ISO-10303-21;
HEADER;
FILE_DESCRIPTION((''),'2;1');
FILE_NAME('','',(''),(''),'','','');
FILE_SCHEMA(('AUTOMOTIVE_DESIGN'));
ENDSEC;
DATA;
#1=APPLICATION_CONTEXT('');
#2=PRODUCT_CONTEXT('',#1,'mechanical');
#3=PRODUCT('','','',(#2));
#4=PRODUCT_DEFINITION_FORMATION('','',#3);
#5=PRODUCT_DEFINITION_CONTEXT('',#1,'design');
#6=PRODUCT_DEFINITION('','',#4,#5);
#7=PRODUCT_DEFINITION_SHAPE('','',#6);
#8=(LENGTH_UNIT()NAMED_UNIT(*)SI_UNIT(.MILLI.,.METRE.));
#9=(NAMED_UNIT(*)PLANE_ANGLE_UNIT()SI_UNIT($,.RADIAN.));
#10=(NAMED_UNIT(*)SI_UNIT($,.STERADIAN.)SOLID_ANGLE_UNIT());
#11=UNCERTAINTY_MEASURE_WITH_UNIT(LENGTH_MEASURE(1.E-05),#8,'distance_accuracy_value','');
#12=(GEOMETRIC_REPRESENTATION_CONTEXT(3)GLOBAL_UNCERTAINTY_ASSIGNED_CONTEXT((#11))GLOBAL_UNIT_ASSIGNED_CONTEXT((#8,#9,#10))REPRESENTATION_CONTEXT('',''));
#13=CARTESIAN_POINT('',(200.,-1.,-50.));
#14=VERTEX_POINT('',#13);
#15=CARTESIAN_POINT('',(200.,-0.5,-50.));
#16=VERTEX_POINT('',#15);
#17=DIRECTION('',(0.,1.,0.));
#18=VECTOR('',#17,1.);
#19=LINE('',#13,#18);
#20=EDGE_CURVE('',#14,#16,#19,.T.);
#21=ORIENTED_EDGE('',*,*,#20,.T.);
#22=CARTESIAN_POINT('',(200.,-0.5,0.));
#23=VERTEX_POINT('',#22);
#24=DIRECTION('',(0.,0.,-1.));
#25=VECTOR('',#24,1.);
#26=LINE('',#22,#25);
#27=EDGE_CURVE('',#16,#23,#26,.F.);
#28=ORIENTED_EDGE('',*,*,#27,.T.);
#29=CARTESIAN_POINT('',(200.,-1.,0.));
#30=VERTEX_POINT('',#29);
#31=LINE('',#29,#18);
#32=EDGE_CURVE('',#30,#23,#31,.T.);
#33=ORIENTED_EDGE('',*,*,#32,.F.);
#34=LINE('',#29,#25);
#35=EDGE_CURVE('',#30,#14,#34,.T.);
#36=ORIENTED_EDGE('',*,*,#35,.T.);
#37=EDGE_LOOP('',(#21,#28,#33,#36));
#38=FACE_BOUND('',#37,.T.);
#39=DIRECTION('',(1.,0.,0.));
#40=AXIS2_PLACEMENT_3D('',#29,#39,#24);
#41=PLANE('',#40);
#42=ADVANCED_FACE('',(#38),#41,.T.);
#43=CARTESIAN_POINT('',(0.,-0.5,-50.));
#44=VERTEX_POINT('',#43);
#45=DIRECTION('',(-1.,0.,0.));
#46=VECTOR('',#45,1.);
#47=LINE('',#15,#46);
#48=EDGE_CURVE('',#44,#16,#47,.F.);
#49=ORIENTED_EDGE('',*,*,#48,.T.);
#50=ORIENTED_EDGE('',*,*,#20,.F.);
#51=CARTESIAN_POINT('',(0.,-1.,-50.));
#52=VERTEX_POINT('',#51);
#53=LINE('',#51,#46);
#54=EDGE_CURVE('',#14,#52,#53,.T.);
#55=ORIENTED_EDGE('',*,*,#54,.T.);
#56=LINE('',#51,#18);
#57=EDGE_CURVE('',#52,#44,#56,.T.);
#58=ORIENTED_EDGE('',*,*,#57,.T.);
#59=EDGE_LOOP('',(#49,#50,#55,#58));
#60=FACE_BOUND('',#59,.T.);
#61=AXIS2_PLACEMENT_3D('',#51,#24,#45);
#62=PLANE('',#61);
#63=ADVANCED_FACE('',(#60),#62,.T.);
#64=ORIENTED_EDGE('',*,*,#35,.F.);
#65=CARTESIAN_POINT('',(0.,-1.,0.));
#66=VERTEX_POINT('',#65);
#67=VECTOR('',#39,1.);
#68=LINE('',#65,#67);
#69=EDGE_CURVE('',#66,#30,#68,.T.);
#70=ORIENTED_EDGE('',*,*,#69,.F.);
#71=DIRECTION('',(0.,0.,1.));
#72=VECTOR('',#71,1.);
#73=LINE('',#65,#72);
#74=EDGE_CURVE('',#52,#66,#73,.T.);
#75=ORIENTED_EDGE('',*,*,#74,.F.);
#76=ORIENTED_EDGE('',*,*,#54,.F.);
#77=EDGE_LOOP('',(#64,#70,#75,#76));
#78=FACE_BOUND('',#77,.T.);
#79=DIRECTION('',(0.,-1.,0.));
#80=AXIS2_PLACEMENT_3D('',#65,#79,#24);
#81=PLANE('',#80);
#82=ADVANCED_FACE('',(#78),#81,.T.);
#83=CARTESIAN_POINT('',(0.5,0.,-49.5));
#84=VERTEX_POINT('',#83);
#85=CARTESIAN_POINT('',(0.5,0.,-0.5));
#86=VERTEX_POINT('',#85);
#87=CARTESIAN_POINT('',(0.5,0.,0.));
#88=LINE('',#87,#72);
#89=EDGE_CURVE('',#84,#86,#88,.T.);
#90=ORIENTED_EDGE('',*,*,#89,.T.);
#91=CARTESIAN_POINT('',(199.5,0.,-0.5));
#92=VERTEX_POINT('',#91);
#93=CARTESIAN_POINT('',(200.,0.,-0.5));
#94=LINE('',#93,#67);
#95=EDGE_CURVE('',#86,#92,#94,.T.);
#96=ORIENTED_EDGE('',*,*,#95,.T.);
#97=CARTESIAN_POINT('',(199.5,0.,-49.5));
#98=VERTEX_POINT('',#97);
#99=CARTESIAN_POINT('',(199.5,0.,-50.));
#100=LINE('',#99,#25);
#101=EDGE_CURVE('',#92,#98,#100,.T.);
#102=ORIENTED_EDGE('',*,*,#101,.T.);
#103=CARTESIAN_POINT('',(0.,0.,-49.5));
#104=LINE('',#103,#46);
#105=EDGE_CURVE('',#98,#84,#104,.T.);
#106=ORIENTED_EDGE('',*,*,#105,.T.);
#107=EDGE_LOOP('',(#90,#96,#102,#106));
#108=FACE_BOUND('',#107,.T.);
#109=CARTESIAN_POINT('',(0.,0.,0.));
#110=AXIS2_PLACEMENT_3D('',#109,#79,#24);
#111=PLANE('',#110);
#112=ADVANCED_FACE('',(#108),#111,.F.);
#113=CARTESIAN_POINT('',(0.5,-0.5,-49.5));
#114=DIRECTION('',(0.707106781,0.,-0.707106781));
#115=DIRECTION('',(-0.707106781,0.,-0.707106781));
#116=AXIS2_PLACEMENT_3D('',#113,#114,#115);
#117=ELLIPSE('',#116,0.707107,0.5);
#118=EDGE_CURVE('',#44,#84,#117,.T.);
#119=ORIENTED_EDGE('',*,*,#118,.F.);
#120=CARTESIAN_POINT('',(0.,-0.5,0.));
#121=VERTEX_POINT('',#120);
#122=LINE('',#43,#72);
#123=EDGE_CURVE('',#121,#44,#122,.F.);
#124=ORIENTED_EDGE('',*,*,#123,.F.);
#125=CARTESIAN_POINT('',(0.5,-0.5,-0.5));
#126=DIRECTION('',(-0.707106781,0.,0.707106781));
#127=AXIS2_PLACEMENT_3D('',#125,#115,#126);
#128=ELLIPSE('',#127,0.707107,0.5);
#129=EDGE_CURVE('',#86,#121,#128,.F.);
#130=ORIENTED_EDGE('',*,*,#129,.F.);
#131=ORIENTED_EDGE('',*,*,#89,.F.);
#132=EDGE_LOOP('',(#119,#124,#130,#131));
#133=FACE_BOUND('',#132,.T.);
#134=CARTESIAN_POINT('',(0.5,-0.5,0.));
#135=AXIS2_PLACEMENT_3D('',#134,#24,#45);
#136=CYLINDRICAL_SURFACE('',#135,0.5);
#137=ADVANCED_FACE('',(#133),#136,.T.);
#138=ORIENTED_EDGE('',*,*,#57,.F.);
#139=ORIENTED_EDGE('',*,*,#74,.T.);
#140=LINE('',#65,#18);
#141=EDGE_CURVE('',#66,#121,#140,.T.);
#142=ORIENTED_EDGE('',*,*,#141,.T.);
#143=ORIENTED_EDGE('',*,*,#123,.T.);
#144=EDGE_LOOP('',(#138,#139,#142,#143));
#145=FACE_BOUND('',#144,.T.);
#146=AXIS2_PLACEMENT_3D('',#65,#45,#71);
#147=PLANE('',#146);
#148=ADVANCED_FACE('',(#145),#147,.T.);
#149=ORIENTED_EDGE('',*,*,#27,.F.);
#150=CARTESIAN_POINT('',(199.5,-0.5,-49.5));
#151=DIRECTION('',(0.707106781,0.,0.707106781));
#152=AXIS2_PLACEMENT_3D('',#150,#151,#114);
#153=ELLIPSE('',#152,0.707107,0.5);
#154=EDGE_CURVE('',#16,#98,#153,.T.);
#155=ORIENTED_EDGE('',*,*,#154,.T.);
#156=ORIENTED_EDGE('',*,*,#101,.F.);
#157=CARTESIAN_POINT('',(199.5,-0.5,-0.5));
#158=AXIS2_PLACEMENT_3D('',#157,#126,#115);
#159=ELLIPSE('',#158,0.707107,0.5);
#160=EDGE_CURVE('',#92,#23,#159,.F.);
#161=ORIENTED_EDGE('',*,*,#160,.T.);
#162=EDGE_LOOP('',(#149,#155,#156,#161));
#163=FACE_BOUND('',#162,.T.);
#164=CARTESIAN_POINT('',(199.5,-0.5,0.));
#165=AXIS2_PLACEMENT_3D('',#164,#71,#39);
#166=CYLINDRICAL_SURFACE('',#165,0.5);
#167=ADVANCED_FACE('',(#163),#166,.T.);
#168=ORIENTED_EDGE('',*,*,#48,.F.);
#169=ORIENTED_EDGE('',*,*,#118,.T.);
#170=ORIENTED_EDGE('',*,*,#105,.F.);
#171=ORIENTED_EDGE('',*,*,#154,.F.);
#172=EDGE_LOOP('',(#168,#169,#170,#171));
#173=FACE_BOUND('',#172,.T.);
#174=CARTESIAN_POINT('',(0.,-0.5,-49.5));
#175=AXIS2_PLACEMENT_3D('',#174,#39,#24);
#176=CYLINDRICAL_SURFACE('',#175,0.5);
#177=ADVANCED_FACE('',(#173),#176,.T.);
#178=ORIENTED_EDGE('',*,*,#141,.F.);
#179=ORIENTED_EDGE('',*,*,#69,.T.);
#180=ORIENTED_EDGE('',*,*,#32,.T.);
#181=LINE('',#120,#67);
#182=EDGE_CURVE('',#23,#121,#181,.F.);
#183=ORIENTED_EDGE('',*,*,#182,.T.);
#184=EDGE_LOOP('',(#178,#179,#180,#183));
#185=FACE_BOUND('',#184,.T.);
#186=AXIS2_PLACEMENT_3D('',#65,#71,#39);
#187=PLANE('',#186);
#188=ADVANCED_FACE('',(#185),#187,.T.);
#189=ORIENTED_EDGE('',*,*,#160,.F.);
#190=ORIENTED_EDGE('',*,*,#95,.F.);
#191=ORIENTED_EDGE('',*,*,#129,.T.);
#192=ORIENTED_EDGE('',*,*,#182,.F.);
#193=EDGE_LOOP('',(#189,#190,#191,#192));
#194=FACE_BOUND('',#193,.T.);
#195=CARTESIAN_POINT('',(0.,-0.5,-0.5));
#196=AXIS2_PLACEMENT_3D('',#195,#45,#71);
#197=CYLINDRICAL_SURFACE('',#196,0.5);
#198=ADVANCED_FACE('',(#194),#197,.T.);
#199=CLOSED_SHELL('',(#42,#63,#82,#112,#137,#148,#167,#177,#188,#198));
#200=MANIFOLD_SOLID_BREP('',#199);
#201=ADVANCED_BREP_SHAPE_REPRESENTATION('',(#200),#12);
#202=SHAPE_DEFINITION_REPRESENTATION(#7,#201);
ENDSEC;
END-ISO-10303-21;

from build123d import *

# Parameters (mm, degrees)
SKETCH_1_W             = 200
SKETCH_1_H             = 50
SM_BASE_FLANGE_1_DEPTH = 1
FILLET_1_R             = 0.5


# Sheet-metal steps are written as plain solids
with BuildPart() as part:
    # Sketch 1 → 基体-法兰1 (new body)
    with BuildSketch(Plane(origin=(0, 0, 0), x_dir=(1, 0, 0), z_dir=(0, 1, 0))):
        with Locations((100, 25)):
            Rectangle(SKETCH_1_W, SKETCH_1_H)
    extrude(amount=-SM_BASE_FLANGE_1_DEPTH)

    # 圆角1
    fillet_1_edges = [part.edges().sort_by_distance(p)[0] for p in [
        (100, 0, -50),
        (200, 0, -25),
        (100, 0, 0),
        (0, 0, -25),
    ]]
    fillet(fillet_1_edges, radius=FILLET_1_R)


solid = part.part
